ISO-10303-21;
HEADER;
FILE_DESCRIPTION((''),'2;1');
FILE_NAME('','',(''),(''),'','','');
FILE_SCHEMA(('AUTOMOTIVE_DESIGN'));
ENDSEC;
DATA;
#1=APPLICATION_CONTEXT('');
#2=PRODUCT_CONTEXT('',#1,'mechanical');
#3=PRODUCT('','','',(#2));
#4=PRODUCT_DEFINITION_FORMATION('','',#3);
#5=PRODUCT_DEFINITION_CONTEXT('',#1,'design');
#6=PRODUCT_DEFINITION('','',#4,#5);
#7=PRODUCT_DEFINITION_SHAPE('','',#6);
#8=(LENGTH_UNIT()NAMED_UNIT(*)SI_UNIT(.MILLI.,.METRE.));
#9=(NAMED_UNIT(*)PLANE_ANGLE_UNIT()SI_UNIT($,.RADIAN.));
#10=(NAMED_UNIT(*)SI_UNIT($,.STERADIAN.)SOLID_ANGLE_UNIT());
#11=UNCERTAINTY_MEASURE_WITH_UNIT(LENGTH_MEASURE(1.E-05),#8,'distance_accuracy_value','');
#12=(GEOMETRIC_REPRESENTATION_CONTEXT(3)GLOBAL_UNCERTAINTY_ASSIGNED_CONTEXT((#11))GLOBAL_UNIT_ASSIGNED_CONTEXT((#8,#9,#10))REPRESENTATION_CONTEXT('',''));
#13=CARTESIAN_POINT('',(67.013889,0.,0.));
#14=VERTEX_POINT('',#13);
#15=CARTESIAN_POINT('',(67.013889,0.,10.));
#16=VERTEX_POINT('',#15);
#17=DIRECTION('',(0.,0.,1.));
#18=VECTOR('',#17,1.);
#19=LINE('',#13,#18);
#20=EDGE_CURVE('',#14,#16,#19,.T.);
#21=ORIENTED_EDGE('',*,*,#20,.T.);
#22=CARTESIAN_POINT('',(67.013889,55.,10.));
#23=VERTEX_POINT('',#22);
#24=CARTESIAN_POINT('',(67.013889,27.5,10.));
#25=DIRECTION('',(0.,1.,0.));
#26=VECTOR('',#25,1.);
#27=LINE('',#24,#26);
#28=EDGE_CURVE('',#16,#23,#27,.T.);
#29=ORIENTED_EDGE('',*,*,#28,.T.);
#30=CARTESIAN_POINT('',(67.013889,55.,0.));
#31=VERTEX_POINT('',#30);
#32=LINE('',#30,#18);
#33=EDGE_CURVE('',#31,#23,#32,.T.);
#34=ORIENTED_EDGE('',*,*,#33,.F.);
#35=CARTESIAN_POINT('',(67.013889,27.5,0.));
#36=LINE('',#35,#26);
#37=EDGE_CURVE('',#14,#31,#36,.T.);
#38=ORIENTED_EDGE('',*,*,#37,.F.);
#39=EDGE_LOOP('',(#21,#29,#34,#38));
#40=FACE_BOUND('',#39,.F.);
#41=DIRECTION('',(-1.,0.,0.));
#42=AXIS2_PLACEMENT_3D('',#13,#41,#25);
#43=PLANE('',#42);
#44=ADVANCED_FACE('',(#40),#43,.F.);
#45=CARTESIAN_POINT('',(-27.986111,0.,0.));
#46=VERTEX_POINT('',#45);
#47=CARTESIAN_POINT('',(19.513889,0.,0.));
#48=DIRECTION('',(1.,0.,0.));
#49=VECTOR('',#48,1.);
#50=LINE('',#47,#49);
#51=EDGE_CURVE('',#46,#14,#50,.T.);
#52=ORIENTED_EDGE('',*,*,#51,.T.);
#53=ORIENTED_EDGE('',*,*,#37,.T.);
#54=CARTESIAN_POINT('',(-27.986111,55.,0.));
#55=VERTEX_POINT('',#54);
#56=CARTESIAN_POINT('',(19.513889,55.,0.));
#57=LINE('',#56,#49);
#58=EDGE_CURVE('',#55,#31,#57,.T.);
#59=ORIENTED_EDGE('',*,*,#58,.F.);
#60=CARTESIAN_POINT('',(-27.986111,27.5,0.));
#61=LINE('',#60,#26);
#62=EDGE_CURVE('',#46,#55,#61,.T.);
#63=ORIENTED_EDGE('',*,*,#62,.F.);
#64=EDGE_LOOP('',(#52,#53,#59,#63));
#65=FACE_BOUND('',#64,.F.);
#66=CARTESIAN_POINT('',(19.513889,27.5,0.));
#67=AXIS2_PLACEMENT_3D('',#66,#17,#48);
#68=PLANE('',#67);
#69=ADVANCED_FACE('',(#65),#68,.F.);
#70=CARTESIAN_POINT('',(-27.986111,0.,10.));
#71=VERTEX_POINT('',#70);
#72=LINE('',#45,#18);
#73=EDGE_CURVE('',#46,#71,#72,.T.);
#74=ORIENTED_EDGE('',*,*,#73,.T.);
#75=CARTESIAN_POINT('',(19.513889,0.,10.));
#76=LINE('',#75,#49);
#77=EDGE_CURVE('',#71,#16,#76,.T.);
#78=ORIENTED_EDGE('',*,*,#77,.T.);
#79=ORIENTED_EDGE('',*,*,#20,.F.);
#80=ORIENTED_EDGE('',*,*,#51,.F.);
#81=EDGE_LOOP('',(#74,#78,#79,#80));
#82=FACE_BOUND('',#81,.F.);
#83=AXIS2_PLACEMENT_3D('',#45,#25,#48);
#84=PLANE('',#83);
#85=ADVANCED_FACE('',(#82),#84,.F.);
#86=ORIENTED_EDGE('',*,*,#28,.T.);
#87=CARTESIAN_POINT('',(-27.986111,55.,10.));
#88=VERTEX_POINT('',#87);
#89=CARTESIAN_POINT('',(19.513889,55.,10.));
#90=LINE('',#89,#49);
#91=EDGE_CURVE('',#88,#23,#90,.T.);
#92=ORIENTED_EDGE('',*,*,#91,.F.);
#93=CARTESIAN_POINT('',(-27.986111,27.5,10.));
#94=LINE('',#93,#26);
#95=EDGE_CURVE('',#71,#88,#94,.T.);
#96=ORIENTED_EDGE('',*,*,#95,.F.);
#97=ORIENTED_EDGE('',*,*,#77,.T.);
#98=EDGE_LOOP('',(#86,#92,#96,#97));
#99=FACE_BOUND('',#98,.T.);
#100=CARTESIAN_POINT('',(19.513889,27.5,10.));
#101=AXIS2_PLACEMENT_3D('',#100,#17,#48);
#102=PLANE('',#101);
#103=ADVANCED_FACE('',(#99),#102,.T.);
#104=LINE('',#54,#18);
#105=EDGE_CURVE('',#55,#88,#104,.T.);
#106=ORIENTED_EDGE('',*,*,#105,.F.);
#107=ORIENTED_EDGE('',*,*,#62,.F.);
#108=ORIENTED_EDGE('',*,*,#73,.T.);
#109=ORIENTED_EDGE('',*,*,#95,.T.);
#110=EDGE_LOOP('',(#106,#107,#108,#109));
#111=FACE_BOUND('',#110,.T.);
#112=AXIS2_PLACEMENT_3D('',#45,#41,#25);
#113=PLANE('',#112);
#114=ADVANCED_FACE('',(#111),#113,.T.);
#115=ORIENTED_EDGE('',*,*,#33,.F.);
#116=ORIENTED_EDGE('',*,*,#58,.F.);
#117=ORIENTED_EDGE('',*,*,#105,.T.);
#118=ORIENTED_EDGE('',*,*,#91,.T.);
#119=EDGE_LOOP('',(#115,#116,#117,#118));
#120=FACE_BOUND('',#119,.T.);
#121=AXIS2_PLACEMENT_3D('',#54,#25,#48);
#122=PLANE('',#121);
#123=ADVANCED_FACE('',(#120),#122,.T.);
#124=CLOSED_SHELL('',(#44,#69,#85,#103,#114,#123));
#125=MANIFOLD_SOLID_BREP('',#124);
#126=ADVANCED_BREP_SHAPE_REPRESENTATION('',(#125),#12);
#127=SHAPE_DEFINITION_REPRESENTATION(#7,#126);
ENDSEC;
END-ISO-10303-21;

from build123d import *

# Parameters (mm, degrees)
F1_E0_BOTTOM_W = 95
F1_E0_BOTTOM_H = 55
F2_DEPTH       = 10


with BuildPart() as f2:
    # F1_E0_bottom (on explicit) → F2 (new body)
    with BuildSketch(Plane(origin=(-27.9861110127, 0, 0), x_dir=(1, 0, 0), z_dir=(0, 0, 1))):
        with Locations((47.5, 27.5)):
            Rectangle(F1_E0_BOTTOM_W, F1_E0_BOTTOM_H)
    extrude(amount=F2_DEPTH)


solid = f2.part
